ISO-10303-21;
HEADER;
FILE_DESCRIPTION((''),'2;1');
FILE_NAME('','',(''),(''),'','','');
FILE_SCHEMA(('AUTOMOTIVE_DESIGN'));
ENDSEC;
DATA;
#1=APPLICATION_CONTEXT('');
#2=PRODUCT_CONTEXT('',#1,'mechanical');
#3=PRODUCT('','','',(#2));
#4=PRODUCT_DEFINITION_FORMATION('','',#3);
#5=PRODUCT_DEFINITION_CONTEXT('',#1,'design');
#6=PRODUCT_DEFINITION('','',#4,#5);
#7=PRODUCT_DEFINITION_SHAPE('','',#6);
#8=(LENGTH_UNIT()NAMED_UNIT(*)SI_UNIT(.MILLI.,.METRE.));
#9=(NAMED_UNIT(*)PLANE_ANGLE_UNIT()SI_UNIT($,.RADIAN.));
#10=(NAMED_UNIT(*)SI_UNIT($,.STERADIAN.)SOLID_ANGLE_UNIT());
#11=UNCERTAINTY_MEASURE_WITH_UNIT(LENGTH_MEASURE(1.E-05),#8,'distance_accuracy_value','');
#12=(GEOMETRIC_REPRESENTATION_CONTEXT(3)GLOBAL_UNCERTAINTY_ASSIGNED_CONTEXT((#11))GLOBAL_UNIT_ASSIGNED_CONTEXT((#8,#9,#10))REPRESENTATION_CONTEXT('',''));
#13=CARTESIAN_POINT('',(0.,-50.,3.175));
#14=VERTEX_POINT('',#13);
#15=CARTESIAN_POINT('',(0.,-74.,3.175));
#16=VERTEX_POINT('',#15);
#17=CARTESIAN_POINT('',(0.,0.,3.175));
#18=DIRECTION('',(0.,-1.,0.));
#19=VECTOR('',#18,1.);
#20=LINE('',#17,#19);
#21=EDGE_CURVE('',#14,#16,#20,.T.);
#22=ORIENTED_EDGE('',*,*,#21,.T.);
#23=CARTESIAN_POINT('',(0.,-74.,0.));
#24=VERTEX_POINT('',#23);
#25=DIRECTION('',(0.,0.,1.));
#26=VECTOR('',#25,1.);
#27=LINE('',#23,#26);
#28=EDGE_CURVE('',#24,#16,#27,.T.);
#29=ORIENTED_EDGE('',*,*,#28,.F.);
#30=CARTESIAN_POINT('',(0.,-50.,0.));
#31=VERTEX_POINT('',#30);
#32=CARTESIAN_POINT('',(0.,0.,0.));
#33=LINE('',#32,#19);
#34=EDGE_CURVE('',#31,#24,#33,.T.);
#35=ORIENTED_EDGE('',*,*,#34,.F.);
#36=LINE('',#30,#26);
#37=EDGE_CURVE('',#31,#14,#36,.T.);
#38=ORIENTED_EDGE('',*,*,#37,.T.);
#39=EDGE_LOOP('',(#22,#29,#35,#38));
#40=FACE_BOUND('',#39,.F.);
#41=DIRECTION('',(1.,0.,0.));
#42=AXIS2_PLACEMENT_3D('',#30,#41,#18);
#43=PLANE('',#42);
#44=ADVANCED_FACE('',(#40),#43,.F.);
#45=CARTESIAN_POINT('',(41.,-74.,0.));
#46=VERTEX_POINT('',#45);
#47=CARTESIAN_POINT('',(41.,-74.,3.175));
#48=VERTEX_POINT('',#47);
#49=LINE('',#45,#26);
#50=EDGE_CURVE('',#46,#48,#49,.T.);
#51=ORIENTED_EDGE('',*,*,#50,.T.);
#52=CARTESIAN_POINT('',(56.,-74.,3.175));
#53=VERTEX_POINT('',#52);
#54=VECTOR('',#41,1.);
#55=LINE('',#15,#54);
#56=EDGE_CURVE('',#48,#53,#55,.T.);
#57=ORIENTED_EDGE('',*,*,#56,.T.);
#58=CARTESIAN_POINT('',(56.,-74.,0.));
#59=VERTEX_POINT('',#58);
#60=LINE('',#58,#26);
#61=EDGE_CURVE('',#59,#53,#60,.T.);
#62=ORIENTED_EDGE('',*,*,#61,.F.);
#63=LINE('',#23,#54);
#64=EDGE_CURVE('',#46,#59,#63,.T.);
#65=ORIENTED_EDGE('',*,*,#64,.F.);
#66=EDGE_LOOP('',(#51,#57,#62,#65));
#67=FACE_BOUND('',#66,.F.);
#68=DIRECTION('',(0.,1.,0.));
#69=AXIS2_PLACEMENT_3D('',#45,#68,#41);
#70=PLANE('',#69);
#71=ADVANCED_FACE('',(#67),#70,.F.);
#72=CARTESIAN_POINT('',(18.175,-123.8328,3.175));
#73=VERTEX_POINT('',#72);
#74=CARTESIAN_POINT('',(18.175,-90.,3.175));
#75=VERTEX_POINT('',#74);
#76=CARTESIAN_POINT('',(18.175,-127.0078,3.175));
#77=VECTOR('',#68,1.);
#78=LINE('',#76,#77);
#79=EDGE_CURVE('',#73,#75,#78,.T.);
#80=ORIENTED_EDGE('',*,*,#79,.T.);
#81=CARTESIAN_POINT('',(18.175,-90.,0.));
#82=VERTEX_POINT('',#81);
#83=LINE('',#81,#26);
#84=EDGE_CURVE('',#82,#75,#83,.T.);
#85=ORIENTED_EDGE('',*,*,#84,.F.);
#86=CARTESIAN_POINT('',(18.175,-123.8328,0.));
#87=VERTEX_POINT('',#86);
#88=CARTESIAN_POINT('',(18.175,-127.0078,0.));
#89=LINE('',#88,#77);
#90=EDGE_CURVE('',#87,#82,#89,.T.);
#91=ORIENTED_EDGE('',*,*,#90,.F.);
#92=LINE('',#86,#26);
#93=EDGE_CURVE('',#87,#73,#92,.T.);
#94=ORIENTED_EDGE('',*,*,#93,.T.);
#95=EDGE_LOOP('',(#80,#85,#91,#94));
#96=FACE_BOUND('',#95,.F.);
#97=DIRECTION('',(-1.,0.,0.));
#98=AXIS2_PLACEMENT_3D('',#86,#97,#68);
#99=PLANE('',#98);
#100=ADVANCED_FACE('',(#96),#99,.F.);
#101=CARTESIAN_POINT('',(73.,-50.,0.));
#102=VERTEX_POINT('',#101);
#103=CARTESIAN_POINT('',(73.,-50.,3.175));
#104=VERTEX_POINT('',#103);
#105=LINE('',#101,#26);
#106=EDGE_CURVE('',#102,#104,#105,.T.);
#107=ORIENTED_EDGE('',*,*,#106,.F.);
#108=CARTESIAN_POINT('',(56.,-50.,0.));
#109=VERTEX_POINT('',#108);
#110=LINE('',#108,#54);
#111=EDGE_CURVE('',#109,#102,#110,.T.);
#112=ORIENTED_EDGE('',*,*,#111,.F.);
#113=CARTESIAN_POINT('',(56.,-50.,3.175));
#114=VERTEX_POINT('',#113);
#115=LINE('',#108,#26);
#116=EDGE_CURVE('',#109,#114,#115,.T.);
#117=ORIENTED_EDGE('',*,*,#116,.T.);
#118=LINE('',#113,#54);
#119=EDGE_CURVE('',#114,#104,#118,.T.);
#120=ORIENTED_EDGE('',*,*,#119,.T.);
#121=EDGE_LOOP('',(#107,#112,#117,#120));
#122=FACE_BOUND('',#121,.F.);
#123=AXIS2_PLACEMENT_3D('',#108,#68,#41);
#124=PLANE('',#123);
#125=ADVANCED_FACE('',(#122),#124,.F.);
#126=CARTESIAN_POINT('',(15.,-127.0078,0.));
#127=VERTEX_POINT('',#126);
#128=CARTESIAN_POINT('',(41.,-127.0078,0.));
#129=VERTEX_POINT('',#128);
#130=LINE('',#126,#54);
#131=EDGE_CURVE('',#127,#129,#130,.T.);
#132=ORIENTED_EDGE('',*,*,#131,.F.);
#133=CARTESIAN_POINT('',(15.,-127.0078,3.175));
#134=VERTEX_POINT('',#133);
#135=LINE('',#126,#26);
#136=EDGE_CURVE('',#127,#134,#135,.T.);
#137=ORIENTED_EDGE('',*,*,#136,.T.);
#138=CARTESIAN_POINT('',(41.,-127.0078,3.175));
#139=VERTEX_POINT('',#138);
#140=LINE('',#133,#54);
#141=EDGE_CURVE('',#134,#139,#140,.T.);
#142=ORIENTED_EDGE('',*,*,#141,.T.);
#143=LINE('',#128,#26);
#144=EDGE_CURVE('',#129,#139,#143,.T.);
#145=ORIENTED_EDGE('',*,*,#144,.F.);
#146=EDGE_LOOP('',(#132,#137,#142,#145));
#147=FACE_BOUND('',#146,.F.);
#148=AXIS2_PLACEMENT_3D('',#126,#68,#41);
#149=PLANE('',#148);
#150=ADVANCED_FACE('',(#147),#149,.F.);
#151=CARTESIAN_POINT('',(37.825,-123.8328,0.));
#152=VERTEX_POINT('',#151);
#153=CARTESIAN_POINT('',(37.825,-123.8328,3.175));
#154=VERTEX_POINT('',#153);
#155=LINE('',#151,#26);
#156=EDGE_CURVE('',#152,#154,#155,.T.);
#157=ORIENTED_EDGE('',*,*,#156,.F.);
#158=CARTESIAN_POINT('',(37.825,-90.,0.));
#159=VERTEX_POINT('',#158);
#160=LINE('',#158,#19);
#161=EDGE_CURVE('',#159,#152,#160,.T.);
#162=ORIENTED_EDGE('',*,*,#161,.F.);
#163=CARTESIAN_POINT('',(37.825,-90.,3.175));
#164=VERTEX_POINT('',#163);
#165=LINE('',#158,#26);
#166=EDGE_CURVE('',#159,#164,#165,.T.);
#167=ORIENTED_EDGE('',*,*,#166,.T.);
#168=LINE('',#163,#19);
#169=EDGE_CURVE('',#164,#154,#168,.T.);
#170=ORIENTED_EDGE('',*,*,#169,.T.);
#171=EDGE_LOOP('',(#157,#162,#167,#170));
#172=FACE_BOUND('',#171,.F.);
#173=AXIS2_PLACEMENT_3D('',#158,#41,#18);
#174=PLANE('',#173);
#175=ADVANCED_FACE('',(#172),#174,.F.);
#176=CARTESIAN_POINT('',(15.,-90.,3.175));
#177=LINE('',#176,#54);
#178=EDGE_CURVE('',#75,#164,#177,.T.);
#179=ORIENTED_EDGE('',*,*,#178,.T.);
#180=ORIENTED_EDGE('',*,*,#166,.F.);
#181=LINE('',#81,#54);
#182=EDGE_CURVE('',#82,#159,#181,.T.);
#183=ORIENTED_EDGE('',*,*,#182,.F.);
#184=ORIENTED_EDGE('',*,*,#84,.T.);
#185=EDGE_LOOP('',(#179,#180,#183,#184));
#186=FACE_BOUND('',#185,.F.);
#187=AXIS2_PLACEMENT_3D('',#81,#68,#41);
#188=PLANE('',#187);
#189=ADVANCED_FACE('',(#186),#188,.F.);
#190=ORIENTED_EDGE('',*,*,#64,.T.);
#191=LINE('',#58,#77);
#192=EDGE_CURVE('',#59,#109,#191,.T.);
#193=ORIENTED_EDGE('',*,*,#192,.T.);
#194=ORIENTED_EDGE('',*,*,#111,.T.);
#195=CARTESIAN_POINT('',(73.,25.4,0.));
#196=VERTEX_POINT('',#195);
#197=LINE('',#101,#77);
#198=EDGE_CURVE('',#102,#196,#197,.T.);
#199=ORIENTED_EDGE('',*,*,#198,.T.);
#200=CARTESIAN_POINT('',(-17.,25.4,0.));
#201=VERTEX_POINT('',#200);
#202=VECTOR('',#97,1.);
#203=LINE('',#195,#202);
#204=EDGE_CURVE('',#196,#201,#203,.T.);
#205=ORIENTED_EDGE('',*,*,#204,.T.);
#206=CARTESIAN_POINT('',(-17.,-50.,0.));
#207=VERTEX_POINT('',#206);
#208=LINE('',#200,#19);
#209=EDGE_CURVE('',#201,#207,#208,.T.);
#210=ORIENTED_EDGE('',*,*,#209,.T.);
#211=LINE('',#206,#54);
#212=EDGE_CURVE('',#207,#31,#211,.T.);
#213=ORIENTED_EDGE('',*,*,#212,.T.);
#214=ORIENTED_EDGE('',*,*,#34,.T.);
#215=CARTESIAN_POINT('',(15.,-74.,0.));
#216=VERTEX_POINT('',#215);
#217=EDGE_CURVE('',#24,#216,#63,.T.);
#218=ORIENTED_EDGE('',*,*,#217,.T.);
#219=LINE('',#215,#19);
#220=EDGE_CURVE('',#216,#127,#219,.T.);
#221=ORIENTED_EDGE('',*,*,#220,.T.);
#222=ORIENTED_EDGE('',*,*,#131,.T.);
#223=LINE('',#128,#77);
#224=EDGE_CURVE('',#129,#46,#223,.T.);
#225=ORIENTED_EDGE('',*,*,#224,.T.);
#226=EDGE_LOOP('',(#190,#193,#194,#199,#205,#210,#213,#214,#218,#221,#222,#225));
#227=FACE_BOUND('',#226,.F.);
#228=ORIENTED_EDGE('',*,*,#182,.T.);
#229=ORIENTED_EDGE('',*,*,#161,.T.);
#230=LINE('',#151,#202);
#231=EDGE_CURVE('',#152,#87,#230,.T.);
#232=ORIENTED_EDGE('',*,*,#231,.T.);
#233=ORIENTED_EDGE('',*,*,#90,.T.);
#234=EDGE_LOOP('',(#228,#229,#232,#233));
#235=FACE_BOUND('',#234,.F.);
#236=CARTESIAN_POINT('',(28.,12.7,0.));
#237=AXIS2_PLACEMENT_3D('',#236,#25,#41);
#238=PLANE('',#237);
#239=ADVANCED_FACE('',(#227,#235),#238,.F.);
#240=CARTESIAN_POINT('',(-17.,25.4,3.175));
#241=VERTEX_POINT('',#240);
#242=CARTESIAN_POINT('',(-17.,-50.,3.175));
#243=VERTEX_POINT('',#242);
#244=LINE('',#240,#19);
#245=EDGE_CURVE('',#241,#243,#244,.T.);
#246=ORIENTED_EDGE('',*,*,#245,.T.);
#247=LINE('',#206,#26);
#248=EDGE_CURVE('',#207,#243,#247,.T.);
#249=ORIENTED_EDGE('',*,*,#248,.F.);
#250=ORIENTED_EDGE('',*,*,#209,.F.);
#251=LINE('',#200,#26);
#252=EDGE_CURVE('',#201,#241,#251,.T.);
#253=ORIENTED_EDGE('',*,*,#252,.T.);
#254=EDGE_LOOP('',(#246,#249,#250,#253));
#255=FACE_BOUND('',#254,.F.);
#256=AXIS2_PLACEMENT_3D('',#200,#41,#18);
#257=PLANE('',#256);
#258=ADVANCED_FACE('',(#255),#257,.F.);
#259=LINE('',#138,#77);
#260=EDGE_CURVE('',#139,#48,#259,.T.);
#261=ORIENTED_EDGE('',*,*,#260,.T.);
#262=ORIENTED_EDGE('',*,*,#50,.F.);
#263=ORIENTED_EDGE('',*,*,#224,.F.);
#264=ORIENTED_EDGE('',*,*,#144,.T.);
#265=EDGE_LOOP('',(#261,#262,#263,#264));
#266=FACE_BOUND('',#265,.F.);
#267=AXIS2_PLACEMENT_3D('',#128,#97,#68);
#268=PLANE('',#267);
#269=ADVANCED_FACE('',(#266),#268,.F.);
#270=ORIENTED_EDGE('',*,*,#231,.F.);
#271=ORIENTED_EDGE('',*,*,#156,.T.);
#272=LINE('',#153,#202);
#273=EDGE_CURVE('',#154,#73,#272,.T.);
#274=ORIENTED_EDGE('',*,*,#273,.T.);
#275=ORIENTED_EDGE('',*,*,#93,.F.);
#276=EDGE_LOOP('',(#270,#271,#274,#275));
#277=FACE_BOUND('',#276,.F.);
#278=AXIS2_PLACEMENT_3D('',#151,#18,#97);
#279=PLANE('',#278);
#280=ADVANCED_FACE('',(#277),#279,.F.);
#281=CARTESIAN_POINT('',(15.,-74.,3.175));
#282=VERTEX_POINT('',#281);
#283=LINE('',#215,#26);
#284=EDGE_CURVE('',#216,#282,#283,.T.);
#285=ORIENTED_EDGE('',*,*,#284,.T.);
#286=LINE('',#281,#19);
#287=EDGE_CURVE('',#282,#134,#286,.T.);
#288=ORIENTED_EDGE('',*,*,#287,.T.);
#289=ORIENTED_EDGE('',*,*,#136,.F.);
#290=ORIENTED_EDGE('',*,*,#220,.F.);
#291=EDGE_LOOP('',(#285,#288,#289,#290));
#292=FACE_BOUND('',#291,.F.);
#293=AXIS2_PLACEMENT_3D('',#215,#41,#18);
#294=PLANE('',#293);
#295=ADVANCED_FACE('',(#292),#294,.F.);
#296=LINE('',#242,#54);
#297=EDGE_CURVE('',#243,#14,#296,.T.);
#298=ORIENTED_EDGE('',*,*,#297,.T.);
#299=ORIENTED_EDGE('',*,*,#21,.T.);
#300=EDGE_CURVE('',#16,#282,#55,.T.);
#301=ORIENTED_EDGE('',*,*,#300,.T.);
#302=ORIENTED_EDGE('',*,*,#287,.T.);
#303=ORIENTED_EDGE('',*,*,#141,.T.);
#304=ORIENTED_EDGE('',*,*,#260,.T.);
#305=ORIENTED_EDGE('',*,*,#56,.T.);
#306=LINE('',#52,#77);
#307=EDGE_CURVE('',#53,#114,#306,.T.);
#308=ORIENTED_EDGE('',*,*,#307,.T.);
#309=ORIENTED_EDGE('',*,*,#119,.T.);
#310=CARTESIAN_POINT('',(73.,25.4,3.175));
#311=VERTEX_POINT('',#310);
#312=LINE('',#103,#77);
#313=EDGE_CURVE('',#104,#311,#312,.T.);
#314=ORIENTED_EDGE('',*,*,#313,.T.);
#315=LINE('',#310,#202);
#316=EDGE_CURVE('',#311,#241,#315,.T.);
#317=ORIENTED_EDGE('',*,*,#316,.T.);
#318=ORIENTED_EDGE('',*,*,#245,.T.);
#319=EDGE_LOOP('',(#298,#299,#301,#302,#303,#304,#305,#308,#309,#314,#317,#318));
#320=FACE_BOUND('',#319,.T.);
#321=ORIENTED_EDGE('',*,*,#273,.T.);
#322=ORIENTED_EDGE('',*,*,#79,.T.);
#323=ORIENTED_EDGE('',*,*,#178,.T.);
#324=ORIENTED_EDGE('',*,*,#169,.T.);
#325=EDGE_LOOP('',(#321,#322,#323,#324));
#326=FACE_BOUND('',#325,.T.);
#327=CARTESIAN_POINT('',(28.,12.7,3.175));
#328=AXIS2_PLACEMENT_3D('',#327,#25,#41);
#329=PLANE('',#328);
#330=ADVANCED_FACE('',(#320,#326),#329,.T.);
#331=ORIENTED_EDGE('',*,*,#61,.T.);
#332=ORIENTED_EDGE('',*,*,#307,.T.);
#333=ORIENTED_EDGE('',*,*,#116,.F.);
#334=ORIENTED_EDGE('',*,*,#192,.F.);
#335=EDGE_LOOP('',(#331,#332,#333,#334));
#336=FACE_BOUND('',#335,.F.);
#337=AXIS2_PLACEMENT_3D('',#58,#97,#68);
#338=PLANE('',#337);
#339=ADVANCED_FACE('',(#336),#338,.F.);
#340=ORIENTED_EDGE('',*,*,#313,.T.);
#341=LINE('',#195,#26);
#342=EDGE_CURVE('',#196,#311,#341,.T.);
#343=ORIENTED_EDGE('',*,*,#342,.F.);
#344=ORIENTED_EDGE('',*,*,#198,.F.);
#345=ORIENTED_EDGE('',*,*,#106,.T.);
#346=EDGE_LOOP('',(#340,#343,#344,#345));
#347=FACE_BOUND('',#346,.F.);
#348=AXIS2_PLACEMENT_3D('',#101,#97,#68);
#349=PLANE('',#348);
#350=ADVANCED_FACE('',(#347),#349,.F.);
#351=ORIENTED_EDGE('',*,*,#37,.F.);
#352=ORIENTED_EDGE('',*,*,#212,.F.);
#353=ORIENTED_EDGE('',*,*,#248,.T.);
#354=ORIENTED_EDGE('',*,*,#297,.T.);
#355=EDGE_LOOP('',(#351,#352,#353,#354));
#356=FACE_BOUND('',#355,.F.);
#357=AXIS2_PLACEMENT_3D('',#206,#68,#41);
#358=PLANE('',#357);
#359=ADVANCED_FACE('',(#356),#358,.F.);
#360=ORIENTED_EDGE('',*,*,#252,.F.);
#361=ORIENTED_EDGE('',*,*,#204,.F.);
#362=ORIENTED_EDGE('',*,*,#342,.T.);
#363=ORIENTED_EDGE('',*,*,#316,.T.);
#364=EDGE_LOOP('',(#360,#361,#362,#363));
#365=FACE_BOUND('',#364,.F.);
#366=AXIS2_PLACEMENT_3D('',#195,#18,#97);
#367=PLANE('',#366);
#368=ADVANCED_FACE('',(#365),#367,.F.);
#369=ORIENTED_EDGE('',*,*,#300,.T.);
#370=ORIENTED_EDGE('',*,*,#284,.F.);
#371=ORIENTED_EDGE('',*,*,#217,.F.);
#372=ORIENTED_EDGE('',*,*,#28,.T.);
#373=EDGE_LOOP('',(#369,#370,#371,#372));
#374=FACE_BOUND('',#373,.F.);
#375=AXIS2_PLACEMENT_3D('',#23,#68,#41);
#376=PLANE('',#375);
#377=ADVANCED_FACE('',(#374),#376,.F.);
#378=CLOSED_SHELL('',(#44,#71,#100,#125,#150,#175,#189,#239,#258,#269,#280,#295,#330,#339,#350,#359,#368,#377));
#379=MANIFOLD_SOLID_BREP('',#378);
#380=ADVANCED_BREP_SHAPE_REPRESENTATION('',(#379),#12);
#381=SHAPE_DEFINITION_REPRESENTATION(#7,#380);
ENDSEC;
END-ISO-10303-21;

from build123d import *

# Parameters (mm, degrees)
F0_W     = 3.175
F0_H     = 25.4
F0_H_2   = 33.8328
F0_H_3   = 3.175
F1_DEPTH = 3.175
F2_DEPTH = 25.4


# Not quite as in the source:
# - a length typed as a fraction of an inch, garbled in the dataset ("3 / 203.2 mm" for 3/8 in), is restored


with BuildPart() as f1:
    # F0 (on Top) → F1 (new body)
    with BuildSketch(Plane.XY):
        Polygon((-13.825, 0), (0, 0), (56, 0), (69.825, 0), (69.825, 25.4), (-13.825, 25.4), align=None)
        Polygon((56, 0), (0, 0), (0, -23), (0, -50), (0, -74), (15, -74), (28, -74), (41, -74), (56, -74), (56, -50), (56, -23), align=None)
        Polygon((0, -23), (0, 0), (-13.825, 0), (-17, 0), (-17, -50), (0, -50), align=None)
        Polygon((69.825, 0), (56, 0), (56, -23), (56, -50), (73, -50), (73, 0), align=None)
        with Locations((-15.4125, 12.7)):
            Rectangle(F0_W, F0_H)
        with Locations((71.4125, 12.7)):
            Rectangle(F0_W, F0_H)
        Polygon((28, -74), (15, -74), (15, -90), (18.175, -90), (21.35, -90), (28, -90), (34.65, -90), (37.825, -90), (41, -90), (41, -74), align=None)
        with Locations((16.5875, -106.9164)):
            Rectangle(F0_W, F0_H_2)
        with Locations((39.4125, -106.9164)):
            Rectangle(F0_W, F0_H_2)
        with Locations((16.5875, -125.4203)):
            Rectangle(F0_W, F0_H_3)
        with Locations((39.4125, -125.4203)):
            Rectangle(F0_W, F0_H_3)
        Polygon((21.35, -123.8328), (18.175, -123.8328), (18.175, -127.0078), (37.825, -127.0078), (37.825, -123.8328), (34.65, -123.8328), align=None)
    extrude(amount=F1_DEPTH)

    # F0 (on Top) → F2 (cut)
    with BuildSketch(Plane.XY):
        Polygon((28, -90), (21.35, -90), (21.35, -123.8328), (34.65, -123.8328), (34.65, -90), align=None)
    extrude(amount=-F2_DEPTH, mode=Mode.SUBTRACT)


solid = f1.part
